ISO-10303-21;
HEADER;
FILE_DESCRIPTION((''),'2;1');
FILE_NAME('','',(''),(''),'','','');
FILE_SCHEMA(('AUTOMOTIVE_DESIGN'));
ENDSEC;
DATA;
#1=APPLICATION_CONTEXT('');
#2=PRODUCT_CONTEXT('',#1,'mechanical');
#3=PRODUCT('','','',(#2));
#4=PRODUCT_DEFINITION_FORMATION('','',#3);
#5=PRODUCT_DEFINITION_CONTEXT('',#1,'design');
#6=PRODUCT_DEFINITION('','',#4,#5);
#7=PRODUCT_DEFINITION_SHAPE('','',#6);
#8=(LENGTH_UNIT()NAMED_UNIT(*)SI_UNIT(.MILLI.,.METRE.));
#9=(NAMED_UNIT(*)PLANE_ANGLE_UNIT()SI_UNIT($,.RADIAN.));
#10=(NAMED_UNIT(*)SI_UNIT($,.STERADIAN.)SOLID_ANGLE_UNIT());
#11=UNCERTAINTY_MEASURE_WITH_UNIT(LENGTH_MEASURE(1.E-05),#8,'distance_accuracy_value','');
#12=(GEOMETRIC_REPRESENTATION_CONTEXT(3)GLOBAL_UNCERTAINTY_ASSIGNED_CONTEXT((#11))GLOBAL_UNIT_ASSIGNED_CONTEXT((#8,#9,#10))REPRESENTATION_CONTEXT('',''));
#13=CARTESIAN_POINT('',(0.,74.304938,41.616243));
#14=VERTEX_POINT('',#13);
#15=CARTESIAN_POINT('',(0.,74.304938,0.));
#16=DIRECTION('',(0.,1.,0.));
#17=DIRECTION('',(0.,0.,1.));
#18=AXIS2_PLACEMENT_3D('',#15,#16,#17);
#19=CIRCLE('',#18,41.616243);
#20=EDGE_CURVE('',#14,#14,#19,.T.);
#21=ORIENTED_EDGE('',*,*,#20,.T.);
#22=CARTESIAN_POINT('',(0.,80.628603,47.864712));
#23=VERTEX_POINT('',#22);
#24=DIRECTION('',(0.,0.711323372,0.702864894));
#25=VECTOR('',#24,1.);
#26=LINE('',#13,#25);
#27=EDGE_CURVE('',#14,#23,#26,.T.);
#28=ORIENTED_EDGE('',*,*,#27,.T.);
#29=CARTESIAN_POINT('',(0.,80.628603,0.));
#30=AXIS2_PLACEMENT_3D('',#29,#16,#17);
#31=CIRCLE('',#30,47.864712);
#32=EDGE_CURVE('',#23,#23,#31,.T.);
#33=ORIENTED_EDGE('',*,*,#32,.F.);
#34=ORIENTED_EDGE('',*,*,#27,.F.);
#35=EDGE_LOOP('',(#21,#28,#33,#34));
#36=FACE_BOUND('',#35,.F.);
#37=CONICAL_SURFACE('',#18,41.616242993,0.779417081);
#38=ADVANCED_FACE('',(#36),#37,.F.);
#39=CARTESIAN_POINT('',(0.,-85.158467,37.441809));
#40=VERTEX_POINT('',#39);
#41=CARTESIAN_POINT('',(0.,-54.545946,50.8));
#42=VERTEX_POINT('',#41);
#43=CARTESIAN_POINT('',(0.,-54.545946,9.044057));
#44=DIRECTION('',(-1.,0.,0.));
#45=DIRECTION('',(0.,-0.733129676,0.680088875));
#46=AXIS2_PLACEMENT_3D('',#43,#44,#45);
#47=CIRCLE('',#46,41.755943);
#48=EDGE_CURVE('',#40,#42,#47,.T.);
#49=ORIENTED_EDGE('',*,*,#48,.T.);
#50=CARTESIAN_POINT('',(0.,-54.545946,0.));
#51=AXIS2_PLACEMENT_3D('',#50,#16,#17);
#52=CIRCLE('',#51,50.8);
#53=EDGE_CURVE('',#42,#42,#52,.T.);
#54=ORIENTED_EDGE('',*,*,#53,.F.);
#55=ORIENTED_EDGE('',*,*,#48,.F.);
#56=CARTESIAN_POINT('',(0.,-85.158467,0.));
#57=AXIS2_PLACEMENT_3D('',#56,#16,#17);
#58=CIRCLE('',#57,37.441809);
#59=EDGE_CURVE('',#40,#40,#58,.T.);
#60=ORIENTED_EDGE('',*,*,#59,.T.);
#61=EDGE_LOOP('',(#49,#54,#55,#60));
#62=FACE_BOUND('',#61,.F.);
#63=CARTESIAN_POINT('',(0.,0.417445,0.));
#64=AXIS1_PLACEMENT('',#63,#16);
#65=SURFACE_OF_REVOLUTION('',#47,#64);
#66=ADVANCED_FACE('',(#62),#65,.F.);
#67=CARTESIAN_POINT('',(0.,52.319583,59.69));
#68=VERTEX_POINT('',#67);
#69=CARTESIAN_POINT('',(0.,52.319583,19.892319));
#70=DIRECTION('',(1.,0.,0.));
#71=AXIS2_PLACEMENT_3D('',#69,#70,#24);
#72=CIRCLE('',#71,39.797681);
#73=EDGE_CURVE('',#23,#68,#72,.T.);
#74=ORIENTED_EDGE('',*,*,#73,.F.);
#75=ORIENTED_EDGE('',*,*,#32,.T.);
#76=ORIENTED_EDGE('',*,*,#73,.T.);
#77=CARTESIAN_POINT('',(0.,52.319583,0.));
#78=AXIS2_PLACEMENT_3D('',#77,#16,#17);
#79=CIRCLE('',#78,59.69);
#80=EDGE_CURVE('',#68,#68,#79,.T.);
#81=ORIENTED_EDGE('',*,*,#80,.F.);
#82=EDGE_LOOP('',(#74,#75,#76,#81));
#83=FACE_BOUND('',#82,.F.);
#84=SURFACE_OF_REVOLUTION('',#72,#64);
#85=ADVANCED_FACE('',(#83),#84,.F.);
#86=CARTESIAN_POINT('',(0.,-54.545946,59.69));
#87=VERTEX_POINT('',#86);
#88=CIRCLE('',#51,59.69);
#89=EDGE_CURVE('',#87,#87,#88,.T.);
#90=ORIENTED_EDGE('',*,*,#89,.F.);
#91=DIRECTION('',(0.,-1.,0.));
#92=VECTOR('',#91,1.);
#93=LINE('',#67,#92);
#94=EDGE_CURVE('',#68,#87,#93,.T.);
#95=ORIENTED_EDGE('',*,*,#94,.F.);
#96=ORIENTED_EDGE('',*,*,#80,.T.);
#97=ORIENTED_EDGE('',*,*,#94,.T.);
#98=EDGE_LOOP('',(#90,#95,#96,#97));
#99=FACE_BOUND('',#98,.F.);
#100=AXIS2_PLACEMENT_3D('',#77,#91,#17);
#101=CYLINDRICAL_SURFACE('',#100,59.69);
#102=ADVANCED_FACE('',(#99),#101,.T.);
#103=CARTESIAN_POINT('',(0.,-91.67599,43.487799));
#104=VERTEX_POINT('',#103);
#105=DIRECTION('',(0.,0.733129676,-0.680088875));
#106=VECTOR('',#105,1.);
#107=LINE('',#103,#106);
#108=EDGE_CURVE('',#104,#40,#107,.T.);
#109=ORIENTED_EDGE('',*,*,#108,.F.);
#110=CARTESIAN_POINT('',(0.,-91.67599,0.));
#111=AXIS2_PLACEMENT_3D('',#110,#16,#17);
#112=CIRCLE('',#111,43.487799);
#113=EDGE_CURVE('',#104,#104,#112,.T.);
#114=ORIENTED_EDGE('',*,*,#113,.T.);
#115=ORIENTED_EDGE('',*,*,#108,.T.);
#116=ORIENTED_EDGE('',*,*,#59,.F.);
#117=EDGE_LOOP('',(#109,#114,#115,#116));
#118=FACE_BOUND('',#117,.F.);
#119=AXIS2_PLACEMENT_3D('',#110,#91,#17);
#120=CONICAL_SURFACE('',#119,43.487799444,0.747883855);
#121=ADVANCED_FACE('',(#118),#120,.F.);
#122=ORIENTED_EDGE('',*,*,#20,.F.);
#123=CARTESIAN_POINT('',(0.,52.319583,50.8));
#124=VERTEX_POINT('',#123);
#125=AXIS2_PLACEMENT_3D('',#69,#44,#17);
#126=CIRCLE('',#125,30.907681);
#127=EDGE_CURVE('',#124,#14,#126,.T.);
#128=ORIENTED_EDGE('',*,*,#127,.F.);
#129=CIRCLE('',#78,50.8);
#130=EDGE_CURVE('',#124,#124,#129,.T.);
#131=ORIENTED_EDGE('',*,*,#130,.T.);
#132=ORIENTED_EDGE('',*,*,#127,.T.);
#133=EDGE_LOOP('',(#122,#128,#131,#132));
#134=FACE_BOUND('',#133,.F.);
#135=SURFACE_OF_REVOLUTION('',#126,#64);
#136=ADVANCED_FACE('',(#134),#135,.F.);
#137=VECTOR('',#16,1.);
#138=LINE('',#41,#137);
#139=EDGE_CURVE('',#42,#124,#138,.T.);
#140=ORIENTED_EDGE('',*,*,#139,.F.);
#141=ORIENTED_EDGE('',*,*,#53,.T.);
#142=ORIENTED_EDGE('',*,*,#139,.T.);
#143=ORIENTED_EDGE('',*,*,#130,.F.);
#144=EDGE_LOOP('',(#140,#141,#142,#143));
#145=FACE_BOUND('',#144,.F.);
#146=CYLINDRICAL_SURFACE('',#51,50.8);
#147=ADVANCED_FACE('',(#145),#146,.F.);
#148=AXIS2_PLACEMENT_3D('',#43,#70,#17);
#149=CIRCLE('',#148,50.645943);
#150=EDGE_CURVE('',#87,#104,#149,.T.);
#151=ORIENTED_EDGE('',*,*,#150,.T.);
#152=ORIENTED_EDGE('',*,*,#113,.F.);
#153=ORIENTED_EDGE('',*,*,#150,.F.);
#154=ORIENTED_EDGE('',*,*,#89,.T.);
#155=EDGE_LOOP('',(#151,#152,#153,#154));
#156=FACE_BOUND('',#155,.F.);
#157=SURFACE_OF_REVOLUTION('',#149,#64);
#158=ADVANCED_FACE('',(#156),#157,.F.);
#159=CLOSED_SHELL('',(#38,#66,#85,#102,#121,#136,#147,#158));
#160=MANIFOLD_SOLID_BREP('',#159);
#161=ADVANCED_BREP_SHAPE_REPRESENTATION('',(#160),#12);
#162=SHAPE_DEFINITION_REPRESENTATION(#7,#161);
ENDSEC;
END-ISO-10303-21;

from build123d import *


# Not quite as in the source:
# - the program builds the solid bodies; features that only make, move or delete a surface that nothing else refers to are left out


with BuildPart() as f1:
    # F0 (on Right) → F1 (revolve)
    with BuildSketch(Plane.YZ):
        with BuildLine():
            ThreePointArc((-85.1584672928, 37.4418093443), (-71.2460039927, 47.3150231752), (-54.5459464192, 50.8))
            Line((-54.5459464192, 50.8), (52.3195825517, 50.8))
            ThreePointArc((52.3195825517, 50.8), (64.2327817533, 48.4117935532), (74.3049383163, 41.6162429929))
            Line((74.3049383163, 41.6162429929), (80.6286030972, 47.8647119045))
            ThreePointArc((80.6286030972, 47.8647119045), (67.6593843985, 56.6148718968), (52.3195825517, 59.69))
            Line((52.3195825517, 59.69), (-54.5459464192, 59.69))
            ThreePointArc((-54.5459464192, 59.69), (-74.8015101461, 55.4630582753), (-91.6759901132, 43.487799444))
            Line((-91.6759901132, 43.487799444), (-85.1584672928, 37.4418093443))
        make_face()
    revolve(axis=Axis((0, 0.417444855, 0), (0, 1, 0)))


solid = f1.part
